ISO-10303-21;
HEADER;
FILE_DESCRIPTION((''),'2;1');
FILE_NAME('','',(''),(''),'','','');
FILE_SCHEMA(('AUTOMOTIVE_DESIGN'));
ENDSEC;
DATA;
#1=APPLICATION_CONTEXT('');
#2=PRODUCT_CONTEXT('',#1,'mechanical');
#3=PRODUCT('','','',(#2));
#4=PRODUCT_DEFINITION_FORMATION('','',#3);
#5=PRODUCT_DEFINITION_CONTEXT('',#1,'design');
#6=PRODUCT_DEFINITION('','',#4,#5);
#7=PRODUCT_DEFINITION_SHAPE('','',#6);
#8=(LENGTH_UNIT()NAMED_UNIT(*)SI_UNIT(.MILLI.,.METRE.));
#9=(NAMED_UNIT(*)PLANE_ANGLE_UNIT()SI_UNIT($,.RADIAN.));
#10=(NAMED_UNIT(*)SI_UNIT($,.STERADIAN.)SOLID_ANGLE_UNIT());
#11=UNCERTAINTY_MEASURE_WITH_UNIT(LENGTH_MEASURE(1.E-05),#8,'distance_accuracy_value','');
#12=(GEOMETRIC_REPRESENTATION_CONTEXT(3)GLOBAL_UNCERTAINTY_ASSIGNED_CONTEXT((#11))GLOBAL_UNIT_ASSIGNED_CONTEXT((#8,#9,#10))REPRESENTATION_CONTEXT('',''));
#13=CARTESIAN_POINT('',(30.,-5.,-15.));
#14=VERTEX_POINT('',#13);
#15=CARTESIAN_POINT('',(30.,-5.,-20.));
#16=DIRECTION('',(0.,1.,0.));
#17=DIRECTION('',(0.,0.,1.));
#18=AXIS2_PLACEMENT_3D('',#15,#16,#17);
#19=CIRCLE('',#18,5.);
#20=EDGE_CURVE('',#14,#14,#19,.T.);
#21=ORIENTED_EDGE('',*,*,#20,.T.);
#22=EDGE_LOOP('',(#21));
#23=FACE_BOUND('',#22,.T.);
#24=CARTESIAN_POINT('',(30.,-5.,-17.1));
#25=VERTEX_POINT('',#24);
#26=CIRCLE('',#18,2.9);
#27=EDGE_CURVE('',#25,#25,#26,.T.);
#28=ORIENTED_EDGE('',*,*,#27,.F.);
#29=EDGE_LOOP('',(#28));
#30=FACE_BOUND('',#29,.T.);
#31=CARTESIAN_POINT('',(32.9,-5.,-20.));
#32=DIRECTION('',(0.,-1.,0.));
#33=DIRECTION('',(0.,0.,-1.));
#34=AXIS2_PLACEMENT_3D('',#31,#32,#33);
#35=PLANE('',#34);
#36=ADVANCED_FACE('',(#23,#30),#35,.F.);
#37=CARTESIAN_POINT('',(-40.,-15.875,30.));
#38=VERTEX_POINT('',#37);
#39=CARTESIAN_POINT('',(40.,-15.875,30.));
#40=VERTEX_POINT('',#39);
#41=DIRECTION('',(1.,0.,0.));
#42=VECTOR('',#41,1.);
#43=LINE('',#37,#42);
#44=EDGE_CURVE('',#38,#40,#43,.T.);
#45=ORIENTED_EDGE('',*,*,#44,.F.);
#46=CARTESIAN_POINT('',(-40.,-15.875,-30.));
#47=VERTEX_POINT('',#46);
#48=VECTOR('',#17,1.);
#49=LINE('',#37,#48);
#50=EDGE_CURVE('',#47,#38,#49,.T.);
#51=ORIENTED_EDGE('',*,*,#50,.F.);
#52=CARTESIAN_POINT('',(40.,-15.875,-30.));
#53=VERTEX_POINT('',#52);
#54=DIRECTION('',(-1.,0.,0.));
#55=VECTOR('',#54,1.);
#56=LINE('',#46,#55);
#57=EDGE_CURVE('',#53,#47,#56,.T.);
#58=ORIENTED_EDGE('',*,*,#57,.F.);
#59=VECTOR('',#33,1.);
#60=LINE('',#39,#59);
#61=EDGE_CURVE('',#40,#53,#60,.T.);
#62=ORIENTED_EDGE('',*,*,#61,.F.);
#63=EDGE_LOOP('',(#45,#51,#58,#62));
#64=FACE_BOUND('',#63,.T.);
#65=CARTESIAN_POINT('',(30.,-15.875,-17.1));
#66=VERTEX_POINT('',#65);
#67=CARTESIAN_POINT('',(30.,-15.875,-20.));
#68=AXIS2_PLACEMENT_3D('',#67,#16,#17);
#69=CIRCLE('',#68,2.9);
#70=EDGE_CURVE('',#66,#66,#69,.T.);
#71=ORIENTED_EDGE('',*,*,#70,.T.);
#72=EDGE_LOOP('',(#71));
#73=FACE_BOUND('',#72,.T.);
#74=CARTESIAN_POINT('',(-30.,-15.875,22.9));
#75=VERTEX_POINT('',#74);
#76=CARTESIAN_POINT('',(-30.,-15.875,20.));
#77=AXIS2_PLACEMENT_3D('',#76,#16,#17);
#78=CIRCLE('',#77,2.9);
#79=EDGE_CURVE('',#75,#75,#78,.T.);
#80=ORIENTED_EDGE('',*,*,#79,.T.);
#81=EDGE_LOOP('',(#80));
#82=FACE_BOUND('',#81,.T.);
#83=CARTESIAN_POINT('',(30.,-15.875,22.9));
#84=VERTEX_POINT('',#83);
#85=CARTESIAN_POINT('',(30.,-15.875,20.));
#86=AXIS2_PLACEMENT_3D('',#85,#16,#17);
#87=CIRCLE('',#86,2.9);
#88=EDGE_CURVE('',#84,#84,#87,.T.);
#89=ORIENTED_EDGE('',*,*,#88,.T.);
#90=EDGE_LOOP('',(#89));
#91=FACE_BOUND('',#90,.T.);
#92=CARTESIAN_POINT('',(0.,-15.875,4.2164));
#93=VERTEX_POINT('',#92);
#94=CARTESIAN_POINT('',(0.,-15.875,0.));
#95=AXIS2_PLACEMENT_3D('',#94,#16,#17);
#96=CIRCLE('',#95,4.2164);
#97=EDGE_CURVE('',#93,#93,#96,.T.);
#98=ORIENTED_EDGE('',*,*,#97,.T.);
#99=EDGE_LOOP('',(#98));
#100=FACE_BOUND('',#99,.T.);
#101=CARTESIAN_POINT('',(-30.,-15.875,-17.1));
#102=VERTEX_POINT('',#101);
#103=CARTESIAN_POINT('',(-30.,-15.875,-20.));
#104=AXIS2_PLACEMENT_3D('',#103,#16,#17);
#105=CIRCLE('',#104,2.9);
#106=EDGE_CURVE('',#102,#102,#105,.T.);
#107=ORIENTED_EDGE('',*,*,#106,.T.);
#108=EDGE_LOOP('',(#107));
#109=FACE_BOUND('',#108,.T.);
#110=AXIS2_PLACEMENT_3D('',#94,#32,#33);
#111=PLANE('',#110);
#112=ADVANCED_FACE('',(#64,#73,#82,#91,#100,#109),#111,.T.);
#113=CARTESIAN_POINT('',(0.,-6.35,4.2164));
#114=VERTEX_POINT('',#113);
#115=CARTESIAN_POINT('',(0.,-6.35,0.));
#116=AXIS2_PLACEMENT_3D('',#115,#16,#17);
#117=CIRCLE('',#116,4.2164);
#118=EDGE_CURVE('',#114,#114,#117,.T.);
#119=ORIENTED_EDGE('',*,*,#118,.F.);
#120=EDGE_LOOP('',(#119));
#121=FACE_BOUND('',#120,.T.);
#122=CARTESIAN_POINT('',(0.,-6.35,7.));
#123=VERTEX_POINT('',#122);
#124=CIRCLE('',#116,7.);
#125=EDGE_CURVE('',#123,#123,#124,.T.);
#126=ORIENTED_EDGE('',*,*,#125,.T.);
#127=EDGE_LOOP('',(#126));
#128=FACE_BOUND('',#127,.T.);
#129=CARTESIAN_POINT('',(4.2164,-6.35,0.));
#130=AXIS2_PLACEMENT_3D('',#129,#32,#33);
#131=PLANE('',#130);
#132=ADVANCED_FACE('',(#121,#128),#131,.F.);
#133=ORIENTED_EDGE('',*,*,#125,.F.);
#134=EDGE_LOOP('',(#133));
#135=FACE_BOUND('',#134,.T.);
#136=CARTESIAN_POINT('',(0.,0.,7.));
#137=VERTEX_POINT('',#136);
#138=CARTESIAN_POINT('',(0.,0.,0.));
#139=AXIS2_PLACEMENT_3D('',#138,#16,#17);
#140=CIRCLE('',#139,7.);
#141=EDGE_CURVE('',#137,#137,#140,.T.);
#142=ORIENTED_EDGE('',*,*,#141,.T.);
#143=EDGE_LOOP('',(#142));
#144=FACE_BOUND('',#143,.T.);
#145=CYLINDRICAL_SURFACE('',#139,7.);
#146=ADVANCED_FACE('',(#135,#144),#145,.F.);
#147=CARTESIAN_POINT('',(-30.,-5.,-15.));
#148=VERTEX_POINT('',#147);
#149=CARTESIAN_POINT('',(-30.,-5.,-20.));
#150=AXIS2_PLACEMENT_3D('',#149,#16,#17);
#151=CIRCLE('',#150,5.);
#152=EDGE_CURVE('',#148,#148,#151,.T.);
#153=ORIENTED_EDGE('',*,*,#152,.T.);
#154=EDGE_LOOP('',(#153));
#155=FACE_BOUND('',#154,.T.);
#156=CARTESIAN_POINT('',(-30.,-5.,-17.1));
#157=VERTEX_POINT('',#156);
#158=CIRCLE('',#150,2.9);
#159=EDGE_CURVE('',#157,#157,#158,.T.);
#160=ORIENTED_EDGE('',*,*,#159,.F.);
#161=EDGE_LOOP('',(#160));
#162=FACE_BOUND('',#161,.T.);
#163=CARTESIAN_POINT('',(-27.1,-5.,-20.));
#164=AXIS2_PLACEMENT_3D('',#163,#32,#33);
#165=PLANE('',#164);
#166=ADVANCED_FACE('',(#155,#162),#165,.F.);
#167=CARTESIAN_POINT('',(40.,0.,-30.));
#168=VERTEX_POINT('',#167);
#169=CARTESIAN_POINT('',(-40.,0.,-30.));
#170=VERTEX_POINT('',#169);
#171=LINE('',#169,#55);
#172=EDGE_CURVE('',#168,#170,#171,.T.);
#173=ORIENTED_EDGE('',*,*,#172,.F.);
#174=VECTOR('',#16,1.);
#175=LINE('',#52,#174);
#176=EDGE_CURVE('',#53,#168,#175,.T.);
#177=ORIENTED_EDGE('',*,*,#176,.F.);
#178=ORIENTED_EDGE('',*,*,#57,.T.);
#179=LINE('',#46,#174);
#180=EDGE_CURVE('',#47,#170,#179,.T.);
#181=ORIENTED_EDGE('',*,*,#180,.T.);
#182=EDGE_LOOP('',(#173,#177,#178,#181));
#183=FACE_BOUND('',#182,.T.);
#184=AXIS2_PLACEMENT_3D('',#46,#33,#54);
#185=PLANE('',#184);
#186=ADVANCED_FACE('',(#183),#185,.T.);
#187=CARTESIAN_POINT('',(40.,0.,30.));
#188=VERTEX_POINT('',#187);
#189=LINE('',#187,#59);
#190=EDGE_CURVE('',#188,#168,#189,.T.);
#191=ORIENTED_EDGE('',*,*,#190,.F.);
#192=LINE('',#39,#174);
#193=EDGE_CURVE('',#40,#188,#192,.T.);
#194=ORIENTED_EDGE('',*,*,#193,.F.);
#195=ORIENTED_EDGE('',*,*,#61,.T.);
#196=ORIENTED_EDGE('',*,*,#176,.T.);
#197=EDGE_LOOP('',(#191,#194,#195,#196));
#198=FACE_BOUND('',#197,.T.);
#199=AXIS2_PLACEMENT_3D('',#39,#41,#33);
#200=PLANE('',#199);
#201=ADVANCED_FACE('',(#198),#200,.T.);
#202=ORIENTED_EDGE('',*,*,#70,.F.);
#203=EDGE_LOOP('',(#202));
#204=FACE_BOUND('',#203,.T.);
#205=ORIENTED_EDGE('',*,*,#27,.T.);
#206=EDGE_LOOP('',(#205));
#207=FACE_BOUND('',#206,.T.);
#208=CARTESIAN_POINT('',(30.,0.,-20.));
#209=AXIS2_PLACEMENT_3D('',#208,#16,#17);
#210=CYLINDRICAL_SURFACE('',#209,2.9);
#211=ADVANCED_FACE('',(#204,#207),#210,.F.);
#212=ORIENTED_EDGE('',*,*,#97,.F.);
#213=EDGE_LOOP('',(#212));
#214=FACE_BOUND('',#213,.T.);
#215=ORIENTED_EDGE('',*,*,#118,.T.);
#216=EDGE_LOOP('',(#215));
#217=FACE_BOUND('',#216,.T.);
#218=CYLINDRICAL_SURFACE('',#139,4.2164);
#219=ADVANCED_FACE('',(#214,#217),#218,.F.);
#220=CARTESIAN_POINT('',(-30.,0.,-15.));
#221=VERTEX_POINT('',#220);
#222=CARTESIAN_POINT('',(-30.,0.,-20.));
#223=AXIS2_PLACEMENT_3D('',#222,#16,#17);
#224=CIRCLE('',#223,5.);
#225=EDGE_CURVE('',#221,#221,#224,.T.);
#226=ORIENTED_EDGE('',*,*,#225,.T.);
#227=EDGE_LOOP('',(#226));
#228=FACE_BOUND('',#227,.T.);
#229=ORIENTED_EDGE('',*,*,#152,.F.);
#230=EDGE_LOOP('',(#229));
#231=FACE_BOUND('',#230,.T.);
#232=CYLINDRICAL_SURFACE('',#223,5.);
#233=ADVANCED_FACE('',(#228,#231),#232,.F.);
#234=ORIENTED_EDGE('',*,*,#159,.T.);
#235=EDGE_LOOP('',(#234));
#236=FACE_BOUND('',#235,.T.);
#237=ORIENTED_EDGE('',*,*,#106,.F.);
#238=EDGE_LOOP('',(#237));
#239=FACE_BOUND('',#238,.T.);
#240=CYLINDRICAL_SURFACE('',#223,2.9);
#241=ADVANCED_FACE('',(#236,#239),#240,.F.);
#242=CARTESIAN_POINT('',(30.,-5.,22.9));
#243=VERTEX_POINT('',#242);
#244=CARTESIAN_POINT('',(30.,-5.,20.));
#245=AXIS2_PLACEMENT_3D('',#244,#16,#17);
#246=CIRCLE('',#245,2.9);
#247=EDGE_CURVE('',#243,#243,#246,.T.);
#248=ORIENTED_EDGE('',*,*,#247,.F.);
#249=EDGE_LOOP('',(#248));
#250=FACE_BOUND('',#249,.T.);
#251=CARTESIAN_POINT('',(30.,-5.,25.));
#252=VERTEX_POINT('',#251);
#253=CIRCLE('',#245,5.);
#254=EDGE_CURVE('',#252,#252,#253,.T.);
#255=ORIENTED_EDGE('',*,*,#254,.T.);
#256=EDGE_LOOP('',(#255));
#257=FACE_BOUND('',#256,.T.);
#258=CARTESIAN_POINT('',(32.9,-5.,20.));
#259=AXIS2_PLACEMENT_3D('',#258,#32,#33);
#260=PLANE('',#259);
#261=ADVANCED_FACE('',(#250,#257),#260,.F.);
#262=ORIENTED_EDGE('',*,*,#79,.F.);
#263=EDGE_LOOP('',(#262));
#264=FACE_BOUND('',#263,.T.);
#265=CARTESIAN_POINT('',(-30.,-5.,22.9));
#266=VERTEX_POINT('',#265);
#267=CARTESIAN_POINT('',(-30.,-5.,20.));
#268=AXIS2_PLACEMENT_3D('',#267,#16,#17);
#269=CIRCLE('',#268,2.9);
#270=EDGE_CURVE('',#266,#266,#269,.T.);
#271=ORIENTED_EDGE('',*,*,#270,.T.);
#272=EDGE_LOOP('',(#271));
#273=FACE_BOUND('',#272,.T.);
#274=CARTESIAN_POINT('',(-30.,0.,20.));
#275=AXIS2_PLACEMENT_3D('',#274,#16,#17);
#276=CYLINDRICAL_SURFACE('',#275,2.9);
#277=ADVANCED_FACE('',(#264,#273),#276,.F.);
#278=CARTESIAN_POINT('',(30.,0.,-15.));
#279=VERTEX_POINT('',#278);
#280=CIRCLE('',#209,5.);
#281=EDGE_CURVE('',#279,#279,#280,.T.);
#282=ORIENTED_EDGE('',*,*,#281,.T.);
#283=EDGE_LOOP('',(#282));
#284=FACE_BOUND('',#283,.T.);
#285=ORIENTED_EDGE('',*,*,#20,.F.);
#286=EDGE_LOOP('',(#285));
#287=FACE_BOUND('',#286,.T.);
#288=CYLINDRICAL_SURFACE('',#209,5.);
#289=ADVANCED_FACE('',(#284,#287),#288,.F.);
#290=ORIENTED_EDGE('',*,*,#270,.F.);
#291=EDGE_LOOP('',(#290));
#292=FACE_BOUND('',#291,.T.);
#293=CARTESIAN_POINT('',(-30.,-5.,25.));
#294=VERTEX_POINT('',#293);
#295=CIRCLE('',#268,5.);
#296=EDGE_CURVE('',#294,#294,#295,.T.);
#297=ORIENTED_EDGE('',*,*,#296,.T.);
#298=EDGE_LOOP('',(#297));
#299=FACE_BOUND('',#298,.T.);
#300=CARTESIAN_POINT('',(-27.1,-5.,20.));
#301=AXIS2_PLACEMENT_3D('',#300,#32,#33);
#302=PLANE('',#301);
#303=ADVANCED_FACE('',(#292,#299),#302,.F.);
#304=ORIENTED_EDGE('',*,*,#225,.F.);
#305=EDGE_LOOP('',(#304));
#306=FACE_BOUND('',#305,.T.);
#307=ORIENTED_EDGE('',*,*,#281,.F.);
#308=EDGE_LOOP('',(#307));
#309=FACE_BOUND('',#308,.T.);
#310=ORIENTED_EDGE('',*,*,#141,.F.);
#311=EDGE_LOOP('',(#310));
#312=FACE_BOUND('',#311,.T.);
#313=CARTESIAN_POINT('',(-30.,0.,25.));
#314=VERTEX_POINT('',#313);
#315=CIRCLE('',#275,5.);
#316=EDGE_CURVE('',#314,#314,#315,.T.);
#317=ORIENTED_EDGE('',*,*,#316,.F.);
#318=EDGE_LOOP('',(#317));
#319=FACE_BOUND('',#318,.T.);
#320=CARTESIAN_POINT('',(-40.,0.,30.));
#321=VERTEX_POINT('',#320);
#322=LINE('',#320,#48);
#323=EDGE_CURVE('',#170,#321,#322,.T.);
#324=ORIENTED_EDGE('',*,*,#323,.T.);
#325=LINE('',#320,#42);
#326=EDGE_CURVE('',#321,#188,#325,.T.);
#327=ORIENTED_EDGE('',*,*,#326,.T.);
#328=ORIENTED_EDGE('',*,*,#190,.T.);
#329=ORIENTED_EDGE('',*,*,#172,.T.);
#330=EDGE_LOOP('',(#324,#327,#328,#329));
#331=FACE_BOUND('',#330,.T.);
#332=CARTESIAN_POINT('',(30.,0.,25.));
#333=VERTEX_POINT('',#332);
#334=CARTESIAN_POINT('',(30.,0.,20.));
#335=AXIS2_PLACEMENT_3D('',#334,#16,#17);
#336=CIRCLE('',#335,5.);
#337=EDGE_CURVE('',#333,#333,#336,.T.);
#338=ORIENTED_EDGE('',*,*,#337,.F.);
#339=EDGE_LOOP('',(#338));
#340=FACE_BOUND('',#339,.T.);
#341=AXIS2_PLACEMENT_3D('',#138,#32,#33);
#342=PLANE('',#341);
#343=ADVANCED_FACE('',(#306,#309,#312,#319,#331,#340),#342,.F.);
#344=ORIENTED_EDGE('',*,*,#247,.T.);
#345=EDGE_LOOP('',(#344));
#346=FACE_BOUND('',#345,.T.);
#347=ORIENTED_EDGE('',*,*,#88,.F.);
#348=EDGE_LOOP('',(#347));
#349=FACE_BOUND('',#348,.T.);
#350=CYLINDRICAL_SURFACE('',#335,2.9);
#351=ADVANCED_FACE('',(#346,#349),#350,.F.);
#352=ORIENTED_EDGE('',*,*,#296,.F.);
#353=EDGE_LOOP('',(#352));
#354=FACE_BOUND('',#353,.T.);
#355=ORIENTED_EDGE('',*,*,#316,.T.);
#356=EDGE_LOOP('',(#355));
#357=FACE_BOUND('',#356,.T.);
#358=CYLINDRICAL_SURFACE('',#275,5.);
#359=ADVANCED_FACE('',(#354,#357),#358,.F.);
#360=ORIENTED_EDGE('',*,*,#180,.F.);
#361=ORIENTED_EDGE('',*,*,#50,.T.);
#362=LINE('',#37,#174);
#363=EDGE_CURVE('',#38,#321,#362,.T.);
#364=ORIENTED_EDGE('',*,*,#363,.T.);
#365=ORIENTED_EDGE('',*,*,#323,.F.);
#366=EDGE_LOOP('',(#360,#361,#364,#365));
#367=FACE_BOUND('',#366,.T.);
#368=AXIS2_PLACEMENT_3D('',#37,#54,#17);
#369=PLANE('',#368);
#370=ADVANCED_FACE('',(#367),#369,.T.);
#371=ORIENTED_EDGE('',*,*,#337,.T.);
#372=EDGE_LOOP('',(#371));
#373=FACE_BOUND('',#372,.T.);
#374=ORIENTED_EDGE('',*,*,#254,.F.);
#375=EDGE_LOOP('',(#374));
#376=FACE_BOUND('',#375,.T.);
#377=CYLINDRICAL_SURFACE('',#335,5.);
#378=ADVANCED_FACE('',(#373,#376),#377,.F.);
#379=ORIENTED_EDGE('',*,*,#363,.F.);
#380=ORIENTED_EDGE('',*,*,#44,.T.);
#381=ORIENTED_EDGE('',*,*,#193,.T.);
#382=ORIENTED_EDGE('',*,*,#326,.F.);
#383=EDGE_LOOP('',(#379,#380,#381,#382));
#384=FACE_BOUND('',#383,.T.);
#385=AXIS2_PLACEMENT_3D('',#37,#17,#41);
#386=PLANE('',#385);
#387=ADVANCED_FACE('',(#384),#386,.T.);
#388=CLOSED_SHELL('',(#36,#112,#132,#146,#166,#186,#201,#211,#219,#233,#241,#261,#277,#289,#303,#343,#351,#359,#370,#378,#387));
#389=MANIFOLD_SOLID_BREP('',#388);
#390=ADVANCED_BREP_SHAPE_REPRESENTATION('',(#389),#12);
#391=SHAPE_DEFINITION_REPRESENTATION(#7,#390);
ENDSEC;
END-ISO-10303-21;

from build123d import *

# Parameters (mm, degrees)
SKETCH1_W                         = 80
SKETCH1_H                         = 60
BASE_FLANGE1_DEPTH                = 15.875
CBORE_FOR_M5_SHCS1_D              = 5.8
CBORE_FOR_M5_SHCS1_CBORE_D        = 10
CBORE_FOR_M5_SHCS1_CBORE_DEPTH    = 5
F_3_8_24_TAPPED_HOLE1_D           = 8.4328
F_3_8_24_TAPPED_HOLE1_CBORE_D     = 14
F_3_8_24_TAPPED_HOLE1_CBORE_DEPTH = 6.35


# Sheet-metal steps are written as plain solids
with BuildPart() as part:
    # Sketch1 → Base-Flange1 (new body)
    with BuildSketch(Plane(origin=(0, 0, 0), x_dir=(1, 0, 0), z_dir=(0, 1, 0))):
        Rectangle(SKETCH1_W, SKETCH1_H)
    extrude(amount=-BASE_FLANGE1_DEPTH)

    # CBORE for M5 SHCS1 (through all)
    with Locations(Plane(origin=(0, 0, 0), x_dir=(1, 0, 0), z_dir=(0, 1, 0))):
        with Locations((-30, -20), (-30, 20), (30, 20), (30, -20)):
            CounterBoreHole(CBORE_FOR_M5_SHCS1_D / 2, CBORE_FOR_M5_SHCS1_CBORE_D / 2, CBORE_FOR_M5_SHCS1_CBORE_DEPTH)

    # 3/8-24 Tapped Hole1 (through all)
    with Locations(Plane(origin=(0, 0, 0), x_dir=(1, 0, 0), z_dir=(0, 1, 0))):
        with Locations((0, 0)):
            CounterBoreHole(F_3_8_24_TAPPED_HOLE1_D / 2, F_3_8_24_TAPPED_HOLE1_CBORE_D / 2, F_3_8_24_TAPPED_HOLE1_CBORE_DEPTH)


solid = part.part
